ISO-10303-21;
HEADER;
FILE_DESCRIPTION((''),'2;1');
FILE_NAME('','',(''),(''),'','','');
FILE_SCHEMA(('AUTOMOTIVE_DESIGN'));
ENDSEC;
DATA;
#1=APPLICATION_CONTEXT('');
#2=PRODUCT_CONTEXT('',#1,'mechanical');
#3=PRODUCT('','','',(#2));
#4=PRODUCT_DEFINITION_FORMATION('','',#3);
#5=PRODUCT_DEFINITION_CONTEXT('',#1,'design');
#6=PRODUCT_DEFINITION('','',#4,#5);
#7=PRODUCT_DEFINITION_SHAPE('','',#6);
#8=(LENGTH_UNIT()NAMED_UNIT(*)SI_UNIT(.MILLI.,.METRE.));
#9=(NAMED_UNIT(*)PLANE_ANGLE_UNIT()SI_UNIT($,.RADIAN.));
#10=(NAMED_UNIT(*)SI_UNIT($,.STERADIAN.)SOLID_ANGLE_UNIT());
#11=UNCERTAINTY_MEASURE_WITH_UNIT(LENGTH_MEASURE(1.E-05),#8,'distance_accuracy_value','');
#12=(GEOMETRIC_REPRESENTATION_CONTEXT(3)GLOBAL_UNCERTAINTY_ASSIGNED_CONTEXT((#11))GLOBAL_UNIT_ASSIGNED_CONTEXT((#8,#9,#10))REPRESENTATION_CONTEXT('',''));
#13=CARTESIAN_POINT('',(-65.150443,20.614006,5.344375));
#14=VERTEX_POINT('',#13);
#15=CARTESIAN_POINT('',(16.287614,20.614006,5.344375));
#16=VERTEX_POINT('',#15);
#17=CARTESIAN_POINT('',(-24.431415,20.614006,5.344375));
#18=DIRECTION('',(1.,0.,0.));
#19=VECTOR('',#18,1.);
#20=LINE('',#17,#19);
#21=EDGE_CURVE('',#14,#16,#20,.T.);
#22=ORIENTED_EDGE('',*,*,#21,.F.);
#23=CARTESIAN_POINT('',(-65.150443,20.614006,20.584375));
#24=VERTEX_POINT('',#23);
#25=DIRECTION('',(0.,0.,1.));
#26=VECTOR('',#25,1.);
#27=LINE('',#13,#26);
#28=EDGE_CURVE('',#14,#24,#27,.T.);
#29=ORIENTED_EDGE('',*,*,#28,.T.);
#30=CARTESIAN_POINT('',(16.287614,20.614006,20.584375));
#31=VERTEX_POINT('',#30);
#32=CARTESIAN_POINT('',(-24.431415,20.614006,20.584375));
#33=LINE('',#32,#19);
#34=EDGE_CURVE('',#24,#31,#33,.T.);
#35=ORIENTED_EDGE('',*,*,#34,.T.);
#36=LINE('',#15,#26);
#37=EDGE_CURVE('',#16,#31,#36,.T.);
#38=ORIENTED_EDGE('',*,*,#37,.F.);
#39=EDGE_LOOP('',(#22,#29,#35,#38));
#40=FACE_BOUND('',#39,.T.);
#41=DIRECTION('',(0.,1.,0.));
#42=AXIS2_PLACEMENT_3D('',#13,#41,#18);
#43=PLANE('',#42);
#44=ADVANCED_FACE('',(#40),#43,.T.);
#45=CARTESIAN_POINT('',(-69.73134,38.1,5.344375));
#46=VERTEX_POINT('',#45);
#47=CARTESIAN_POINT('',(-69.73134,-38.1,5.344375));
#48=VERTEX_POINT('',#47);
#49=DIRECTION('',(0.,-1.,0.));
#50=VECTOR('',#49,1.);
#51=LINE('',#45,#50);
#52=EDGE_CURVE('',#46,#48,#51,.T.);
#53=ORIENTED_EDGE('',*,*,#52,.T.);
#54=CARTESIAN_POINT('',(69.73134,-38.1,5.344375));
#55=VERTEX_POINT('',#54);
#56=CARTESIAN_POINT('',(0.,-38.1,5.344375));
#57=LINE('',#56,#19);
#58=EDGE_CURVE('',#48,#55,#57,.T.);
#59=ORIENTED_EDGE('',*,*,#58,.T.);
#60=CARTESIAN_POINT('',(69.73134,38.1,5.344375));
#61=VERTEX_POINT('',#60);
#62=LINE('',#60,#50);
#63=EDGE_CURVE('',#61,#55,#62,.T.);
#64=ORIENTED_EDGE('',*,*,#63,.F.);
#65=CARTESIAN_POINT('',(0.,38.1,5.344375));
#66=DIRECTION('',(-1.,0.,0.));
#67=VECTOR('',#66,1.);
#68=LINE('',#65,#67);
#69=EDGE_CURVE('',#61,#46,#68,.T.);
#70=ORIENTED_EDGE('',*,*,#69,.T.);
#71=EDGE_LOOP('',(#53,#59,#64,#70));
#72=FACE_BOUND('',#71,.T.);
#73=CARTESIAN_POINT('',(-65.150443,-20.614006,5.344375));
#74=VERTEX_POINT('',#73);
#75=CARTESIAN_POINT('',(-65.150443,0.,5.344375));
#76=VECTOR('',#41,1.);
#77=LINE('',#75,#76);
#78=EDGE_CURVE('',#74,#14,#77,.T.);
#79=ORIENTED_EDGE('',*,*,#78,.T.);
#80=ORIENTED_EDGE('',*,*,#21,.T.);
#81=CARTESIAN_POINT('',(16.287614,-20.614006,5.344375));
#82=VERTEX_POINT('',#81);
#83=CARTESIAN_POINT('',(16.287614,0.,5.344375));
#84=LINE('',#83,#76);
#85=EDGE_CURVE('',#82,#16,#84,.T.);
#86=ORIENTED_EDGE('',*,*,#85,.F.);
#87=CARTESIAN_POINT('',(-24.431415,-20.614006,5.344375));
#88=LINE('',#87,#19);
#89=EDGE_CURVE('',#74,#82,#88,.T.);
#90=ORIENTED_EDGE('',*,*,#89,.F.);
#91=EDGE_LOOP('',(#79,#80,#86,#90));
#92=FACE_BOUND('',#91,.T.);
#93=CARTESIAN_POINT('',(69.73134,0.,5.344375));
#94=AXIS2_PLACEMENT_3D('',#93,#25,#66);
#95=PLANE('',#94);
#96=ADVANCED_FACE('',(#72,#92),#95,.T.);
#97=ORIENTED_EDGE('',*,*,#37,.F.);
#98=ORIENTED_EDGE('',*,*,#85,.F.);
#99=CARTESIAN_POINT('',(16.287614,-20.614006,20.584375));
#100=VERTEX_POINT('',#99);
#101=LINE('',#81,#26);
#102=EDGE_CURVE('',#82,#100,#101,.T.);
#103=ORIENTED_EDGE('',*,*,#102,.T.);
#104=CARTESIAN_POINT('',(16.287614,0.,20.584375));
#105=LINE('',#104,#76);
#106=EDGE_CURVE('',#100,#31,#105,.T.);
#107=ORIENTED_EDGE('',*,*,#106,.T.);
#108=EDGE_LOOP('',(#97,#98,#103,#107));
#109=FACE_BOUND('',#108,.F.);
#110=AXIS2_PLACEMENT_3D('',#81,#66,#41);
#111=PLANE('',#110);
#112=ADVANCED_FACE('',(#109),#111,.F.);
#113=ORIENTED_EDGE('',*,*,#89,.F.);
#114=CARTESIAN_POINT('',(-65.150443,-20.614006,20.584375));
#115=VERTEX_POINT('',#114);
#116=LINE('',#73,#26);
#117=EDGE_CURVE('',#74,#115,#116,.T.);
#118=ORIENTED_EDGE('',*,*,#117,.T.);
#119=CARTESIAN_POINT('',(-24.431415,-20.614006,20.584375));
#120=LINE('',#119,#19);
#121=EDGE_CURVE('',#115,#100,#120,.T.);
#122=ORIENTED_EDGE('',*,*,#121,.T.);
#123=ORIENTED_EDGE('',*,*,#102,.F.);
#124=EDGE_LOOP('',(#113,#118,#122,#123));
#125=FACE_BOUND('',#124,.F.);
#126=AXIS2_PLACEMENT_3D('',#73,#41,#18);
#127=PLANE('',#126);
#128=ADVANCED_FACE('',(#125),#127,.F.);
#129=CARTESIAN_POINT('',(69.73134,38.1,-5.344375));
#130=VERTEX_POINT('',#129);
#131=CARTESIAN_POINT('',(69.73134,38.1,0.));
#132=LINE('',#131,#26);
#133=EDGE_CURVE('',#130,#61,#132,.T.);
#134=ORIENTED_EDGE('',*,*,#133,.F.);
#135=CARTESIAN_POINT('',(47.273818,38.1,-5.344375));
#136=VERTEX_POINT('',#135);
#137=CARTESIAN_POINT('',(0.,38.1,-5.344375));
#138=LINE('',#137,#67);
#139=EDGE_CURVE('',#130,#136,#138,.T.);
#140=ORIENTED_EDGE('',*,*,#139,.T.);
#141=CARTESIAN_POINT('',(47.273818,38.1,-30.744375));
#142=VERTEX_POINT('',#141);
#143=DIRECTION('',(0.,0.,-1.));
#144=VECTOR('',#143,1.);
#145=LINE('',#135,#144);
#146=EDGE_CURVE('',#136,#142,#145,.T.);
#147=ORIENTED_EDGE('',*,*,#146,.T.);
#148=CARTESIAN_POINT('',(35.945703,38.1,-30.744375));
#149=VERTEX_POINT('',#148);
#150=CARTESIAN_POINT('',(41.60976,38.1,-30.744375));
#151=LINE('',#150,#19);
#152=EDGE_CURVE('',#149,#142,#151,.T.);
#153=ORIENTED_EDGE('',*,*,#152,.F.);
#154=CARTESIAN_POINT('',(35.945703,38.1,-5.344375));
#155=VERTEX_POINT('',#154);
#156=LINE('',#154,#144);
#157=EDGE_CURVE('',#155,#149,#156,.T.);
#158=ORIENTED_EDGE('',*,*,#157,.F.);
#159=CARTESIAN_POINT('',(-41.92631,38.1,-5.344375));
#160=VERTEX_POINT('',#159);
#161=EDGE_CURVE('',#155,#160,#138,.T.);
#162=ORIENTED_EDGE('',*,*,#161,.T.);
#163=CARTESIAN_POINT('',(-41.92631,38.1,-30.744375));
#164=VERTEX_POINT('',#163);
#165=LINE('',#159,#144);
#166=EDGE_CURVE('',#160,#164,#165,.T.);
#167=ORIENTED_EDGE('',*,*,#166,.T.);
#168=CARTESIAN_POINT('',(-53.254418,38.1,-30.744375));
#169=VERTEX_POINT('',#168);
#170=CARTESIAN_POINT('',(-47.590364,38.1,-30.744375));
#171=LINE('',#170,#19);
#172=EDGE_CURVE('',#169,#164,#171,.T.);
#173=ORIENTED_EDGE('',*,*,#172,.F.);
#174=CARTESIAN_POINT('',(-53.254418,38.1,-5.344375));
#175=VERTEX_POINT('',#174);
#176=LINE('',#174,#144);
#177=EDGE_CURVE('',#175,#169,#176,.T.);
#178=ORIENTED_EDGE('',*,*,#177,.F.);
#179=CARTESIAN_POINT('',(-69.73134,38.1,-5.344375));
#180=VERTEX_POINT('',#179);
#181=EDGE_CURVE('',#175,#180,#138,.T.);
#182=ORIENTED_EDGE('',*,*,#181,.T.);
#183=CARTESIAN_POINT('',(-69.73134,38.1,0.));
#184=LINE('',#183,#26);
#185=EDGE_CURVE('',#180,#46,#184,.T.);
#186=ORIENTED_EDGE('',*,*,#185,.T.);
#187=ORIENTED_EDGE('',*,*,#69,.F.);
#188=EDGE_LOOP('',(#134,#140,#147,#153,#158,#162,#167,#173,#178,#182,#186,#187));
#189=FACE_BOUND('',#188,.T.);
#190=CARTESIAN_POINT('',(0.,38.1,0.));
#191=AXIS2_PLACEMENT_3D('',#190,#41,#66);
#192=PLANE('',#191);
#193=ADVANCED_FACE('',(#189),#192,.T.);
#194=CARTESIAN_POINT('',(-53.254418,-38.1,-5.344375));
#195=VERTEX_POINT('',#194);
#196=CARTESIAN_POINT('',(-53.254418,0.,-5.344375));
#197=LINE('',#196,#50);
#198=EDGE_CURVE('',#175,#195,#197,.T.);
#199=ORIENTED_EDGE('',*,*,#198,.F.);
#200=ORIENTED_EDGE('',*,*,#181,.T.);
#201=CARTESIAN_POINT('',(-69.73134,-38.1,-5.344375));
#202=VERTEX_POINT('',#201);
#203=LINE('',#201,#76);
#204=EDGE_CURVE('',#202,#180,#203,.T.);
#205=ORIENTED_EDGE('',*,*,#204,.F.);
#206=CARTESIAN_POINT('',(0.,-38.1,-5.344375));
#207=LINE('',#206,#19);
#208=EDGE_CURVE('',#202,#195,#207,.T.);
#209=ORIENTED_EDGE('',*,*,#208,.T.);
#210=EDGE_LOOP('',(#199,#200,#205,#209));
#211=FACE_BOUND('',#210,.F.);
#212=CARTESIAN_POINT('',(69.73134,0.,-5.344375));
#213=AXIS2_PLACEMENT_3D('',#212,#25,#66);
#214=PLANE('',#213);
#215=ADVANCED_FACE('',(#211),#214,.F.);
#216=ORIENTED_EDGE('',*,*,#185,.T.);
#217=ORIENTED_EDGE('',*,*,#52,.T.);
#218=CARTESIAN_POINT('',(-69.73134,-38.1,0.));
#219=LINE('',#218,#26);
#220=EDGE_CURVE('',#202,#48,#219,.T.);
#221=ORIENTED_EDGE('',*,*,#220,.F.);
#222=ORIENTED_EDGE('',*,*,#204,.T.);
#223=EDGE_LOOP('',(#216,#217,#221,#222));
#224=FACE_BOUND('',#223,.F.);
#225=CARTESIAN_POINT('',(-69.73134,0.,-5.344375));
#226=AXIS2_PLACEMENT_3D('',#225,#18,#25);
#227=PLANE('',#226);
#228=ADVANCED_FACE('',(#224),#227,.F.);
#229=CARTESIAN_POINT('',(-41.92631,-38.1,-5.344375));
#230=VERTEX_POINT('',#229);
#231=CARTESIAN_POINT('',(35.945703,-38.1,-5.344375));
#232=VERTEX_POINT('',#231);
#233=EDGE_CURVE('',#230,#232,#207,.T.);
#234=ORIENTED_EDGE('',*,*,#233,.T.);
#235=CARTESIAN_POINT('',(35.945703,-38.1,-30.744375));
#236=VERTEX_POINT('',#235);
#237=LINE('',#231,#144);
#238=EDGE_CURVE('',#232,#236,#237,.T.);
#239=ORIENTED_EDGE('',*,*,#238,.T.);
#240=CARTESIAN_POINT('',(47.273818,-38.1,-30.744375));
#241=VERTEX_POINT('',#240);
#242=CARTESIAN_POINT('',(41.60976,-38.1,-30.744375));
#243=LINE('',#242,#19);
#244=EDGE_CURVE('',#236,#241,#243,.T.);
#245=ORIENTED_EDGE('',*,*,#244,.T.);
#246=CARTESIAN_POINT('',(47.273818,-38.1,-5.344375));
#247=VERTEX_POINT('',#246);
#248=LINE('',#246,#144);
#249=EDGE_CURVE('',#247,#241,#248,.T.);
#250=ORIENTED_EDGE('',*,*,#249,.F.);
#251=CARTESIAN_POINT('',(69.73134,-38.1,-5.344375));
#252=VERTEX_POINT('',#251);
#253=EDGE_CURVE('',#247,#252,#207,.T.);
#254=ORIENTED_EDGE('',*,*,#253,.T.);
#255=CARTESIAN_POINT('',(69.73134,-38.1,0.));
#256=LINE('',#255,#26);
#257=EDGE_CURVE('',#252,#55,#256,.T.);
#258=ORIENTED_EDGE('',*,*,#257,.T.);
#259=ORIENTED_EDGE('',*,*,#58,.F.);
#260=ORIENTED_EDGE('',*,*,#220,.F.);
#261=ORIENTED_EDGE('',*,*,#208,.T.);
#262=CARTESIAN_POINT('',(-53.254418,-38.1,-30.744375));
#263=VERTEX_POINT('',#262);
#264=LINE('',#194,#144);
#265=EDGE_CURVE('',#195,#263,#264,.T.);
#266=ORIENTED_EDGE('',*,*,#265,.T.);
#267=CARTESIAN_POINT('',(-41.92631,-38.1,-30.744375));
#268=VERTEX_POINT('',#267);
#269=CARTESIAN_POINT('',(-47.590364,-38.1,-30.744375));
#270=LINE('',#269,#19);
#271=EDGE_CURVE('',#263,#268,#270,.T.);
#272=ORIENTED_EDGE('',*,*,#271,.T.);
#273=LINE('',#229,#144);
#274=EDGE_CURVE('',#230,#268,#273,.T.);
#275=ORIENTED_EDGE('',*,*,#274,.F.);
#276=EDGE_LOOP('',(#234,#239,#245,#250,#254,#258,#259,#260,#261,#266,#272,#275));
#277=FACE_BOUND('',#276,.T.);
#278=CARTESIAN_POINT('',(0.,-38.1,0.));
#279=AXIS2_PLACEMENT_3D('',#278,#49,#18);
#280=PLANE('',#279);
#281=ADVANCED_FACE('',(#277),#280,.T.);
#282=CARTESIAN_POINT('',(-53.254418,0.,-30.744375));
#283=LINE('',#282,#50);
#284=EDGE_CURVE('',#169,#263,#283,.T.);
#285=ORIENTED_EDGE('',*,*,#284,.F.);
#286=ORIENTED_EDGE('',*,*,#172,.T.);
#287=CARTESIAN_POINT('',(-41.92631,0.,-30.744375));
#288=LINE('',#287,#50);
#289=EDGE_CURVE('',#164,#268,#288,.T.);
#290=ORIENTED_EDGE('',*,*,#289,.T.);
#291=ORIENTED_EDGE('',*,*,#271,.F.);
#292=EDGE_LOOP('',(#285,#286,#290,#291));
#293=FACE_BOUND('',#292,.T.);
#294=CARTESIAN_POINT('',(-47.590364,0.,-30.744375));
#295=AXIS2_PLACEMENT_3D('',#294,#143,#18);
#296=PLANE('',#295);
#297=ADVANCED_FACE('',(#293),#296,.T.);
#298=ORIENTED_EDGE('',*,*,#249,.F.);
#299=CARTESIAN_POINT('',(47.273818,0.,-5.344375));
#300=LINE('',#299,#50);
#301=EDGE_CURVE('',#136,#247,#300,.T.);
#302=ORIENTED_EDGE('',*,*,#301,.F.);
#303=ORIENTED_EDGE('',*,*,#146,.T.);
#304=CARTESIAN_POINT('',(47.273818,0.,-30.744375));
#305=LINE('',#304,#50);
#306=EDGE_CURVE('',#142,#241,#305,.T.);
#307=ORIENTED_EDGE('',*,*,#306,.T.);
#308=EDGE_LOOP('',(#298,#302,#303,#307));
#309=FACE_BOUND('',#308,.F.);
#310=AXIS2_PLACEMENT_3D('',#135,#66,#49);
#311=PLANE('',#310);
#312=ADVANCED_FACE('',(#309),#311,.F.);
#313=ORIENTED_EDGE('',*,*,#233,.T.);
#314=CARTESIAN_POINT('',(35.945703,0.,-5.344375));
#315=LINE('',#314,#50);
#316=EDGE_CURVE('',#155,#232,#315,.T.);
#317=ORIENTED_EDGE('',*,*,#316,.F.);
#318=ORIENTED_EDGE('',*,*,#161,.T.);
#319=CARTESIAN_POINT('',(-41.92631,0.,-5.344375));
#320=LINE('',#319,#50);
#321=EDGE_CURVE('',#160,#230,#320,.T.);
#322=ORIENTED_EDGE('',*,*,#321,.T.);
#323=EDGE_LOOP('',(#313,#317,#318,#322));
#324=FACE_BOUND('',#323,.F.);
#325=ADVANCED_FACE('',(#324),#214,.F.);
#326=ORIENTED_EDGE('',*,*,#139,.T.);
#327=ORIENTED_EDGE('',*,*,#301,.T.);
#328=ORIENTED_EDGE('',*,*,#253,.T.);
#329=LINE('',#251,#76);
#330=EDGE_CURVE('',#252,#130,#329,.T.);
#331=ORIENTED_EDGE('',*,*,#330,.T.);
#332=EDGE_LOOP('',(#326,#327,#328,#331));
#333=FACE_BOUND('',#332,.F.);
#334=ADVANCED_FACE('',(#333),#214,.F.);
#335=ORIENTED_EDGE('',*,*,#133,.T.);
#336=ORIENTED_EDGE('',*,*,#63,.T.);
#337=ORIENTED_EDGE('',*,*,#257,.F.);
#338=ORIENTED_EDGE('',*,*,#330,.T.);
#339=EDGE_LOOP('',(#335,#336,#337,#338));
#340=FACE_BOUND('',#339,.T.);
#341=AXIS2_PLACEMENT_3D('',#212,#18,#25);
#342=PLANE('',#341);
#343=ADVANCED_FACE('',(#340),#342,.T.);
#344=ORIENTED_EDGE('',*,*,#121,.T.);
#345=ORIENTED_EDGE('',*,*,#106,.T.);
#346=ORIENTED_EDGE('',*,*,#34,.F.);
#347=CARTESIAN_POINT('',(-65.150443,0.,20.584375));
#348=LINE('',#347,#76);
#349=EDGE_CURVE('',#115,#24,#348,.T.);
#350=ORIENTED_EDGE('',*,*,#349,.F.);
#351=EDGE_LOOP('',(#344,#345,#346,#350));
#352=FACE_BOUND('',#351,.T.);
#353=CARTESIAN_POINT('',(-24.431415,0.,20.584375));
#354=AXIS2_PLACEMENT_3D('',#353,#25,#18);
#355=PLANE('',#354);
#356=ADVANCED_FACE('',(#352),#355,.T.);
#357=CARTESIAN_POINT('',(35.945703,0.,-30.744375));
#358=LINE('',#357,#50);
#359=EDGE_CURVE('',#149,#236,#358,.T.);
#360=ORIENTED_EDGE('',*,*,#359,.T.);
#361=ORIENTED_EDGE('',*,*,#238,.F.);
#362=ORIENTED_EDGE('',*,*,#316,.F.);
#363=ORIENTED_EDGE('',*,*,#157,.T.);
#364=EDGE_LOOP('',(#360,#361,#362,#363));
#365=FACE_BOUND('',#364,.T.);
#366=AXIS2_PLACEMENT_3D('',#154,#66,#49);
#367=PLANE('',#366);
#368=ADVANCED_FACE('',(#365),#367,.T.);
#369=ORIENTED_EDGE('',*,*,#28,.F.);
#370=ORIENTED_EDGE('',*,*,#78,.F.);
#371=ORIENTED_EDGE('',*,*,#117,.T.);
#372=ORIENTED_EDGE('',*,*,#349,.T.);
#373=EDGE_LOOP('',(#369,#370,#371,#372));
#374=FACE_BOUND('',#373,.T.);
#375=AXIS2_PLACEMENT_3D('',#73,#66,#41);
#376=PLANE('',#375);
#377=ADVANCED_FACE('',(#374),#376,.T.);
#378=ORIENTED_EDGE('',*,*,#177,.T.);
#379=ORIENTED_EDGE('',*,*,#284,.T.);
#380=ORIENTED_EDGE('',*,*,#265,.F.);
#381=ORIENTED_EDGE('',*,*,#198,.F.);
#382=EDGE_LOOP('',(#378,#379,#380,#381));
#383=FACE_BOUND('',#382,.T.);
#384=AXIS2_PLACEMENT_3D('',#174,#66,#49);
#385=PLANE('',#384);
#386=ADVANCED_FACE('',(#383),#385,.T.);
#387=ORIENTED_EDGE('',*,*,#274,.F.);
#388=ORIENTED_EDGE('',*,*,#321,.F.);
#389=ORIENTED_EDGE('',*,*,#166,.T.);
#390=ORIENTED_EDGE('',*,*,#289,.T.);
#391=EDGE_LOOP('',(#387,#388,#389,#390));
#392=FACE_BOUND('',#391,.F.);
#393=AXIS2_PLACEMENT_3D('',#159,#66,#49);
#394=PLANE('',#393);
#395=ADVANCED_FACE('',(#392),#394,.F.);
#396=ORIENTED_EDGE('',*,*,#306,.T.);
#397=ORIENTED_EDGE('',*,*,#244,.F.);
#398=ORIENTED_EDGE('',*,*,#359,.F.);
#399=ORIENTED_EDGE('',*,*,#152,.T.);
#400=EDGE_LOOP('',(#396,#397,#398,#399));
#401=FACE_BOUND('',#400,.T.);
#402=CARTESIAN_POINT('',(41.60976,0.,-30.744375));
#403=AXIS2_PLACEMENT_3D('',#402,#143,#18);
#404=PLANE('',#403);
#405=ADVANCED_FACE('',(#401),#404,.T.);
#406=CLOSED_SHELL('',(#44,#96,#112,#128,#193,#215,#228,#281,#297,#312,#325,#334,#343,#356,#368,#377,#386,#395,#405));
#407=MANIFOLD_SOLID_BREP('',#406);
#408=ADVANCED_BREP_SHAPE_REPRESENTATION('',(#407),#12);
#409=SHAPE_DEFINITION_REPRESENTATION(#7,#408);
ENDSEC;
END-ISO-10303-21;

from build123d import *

# Parameters (mm, degrees)
F0_W     = 139.4626796246
F0_H     = 10.6887500733
F1_DEPTH = 38.1
F2_W     = 139.4626796246
F2_H     = 10.6887500733
F3_DEPTH = 38.1
F4_W     = 11.3281075606
F4_H     = 76.2
F5_DEPTH = 25.4
F6_W     = 11.3281150824
F6_H     = 76.2
F7_DEPTH = 25.4
F8_W     = 81.4380571246
F8_H     = 41.2280112505
F9_DEPTH = 15.24


# Not quite as in the source:
# - the program builds the solid bodies; features that only make, move or delete a surface that nothing else refers to are left out


with BuildPart() as f1:
    # F0 (on Front) → F1 (new body)
    with BuildSketch(Plane.XZ):
        Rectangle(F0_W, F0_H)
    extrude(amount=F1_DEPTH)

    # F2 (on face) → F3 (join)
    with BuildSketch(Plane(origin=(0, 0, 0), x_dir=(-1, 0, 0), z_dir=(0, 1, 0))):
        Rectangle(F2_W, F2_H)
    extrude(amount=F3_DEPTH)

    # F4 (on face) → F5 (join)
    with BuildSketch(Plane(origin=(0, 0, -5.3443750367), x_dir=(1, 0, 0), z_dir=(0, 0, -1))):
        with Locations((-47.5903637707, 0)):
            Rectangle(F4_W, F4_H)
    extrude(amount=F5_DEPTH)

    # F6 (on face) → F7 (join)
    with BuildSketch(Plane(origin=(0, 0, -5.3443750367), x_dir=(1, 0, 0), z_dir=(0, 0, -1))):
        with Locations((41.6097603738, 0)):
            Rectangle(F6_W, F6_H)
    extrude(amount=F7_DEPTH)

    # F8 (on face) → F9 (join)
    with BuildSketch(Plane.XY.offset(5.3443750367)):
        with Locations((-24.4314149022, 0)):
            Rectangle(F8_W, F8_H)
    extrude(amount=F9_DEPTH)


solid = f1.part
